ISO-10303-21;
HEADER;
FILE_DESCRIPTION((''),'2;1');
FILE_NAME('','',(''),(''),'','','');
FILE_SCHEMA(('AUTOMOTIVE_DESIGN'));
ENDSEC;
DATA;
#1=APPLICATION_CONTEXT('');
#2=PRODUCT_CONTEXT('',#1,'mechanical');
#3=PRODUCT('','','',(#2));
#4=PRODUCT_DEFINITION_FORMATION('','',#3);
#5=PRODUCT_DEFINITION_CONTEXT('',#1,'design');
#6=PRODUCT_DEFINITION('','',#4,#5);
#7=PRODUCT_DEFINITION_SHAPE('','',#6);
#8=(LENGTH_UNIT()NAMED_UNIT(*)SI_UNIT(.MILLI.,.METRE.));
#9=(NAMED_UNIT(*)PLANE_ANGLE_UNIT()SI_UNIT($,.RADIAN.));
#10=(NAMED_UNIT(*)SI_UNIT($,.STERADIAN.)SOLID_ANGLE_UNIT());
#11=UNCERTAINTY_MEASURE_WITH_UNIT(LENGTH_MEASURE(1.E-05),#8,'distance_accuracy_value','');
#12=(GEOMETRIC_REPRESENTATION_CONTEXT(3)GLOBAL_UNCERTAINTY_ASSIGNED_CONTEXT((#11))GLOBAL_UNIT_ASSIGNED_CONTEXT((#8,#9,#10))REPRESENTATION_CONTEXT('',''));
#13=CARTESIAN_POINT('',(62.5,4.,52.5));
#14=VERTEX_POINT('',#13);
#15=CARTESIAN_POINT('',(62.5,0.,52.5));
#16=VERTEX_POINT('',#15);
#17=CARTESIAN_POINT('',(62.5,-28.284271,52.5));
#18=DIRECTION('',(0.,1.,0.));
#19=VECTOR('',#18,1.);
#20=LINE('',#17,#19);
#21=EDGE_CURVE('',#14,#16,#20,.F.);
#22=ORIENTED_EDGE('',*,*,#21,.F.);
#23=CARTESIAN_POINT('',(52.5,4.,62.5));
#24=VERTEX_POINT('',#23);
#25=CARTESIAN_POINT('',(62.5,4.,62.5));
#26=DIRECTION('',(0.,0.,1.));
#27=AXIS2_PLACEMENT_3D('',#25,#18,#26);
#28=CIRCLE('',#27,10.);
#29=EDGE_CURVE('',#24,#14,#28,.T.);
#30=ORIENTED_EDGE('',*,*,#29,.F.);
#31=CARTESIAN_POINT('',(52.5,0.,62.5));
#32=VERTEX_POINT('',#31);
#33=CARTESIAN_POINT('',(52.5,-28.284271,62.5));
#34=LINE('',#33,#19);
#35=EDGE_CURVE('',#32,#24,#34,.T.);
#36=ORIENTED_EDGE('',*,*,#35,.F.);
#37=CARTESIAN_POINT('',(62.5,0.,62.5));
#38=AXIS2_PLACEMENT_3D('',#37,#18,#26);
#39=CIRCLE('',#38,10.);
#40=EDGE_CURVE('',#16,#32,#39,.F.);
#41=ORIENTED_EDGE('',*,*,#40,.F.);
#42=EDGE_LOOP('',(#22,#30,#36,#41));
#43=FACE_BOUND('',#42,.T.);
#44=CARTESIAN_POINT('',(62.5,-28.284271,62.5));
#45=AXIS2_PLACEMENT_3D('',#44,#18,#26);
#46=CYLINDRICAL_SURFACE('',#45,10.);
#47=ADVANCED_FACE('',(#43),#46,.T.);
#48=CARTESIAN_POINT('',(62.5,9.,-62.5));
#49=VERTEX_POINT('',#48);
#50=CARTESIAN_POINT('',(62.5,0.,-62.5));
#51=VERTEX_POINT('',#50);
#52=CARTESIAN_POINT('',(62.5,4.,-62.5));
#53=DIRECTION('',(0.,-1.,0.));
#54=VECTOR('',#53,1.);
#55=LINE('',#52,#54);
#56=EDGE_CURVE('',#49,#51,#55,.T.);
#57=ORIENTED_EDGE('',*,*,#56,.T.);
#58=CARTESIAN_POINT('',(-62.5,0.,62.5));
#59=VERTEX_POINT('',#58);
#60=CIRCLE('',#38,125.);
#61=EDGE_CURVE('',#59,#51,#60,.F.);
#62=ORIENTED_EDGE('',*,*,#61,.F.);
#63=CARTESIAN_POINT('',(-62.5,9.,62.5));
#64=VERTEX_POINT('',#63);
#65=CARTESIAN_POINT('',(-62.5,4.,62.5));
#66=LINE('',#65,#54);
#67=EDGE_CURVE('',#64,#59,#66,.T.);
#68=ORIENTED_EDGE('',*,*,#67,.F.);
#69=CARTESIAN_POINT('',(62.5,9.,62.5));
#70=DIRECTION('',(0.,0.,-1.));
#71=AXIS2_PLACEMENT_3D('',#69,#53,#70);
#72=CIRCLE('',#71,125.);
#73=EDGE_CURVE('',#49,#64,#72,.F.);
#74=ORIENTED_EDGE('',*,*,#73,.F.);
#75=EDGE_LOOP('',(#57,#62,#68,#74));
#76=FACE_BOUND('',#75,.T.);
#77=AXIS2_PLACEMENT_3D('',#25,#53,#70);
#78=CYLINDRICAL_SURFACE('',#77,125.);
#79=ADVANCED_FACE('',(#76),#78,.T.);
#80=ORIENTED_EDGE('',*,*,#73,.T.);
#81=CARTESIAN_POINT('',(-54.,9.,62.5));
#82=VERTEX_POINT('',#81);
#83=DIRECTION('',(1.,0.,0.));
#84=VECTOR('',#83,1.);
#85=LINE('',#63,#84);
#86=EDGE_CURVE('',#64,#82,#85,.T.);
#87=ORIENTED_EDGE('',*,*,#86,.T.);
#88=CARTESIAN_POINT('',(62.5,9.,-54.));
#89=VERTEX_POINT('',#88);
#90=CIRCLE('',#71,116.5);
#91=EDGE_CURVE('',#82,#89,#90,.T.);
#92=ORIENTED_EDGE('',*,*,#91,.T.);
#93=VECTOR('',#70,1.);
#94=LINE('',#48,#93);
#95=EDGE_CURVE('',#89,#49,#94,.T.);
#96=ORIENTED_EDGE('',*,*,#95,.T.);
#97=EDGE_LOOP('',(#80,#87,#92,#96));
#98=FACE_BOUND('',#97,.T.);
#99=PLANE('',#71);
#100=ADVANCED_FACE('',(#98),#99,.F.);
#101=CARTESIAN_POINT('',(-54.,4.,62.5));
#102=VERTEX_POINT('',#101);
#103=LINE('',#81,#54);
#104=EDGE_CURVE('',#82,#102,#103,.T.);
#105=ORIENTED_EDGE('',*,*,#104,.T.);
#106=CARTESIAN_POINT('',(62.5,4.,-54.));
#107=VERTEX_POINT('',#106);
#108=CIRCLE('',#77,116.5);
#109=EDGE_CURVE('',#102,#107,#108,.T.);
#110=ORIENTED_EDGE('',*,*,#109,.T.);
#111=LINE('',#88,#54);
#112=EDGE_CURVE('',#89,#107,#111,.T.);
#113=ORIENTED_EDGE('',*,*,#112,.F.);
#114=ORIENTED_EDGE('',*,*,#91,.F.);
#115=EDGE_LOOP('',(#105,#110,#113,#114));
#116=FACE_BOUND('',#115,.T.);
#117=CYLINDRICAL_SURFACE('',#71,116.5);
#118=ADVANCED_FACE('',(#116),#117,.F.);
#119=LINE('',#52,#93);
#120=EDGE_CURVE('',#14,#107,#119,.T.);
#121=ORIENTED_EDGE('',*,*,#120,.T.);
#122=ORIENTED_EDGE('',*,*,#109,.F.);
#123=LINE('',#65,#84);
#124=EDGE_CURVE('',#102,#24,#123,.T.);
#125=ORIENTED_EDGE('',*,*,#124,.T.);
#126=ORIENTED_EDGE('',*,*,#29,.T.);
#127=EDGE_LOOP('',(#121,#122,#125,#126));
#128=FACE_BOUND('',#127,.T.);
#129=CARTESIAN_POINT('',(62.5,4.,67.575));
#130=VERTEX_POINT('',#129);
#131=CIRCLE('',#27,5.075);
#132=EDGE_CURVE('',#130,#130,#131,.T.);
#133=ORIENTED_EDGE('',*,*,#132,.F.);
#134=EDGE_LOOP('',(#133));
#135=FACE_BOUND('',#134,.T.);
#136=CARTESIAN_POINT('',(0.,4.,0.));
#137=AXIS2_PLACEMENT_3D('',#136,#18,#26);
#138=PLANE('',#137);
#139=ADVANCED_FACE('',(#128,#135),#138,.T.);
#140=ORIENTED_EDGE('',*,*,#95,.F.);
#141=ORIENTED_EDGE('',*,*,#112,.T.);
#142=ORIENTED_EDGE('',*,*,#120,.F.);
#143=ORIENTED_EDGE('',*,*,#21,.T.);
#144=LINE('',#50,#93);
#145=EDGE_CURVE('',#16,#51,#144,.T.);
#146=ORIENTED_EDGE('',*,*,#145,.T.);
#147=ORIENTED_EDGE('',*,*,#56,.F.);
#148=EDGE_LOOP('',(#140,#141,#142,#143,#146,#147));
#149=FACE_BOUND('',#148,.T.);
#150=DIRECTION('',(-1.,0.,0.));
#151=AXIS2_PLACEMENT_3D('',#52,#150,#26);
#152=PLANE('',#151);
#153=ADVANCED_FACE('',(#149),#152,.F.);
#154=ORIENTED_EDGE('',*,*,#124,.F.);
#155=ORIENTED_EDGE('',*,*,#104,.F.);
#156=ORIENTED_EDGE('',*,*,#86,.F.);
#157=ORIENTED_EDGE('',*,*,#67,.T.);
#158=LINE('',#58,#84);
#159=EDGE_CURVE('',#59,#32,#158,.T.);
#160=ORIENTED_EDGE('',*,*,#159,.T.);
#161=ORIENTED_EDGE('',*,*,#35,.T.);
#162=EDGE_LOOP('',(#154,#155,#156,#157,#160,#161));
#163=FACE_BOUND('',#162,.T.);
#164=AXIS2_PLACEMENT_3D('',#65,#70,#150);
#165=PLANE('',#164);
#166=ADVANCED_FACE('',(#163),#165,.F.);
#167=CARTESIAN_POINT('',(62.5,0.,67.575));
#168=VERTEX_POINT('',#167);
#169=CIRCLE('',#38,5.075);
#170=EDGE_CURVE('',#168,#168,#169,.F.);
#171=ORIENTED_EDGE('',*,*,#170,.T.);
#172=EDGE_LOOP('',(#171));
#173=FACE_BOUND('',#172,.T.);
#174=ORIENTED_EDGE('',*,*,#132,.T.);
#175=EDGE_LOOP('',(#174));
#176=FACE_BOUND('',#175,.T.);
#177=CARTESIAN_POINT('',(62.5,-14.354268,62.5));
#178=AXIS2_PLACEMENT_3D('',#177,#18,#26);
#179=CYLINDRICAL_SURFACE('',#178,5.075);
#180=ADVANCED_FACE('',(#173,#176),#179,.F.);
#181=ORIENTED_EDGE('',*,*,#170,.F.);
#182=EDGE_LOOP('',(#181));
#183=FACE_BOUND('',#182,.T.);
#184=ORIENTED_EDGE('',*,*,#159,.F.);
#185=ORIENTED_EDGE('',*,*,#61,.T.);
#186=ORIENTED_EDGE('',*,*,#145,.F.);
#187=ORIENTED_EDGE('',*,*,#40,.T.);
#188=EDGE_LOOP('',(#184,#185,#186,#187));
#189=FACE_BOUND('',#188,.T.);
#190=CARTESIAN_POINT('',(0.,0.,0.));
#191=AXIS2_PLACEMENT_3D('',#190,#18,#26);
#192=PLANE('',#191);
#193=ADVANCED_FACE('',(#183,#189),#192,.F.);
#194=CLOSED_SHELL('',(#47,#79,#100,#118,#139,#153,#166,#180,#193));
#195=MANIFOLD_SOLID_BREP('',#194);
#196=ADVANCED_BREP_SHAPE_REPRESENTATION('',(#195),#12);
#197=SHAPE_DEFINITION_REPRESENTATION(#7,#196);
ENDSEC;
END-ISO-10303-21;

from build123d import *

# Parameters (mm, degrees)
SKETCH1_W           = 125
SKETCH1_H           = 125
BOSS_EXTRUDE1_DEPTH = 4
BOSS_EXTRUDE2_DEPTH = 5
SKETCH3_R           = 10
BOSS_EXTRUDE3_DEPTH = 4
SKETCH4_R           = 5.075
CUT_EXTRUDE1_DEPTH  = 4
FILLET1_R           = 125


with BuildPart() as part:
    # Sketch1 → Boss-Extrude1 (new body)
    with BuildSketch(Plane(origin=(0, 0, 0), x_dir=(1, 0, 0), z_dir=(0, 1, 0))):
        Rectangle(SKETCH1_W, SKETCH1_H)
    extrude(amount=BOSS_EXTRUDE1_DEPTH)

    # Sketch2 → Boss-Extrude2 (add)
    with BuildSketch(Plane(origin=(0, 4, 0), x_dir=(1, 0, 0), z_dir=(0, 1, 0))):
        with BuildLine():
            Line((-62.5, -62.5), (-62.5, 62.5))
            Line((-62.5, 62.5), (62.5, 62.5))
            Line((62.5, 62.5), (62.5, 54))
            ThreePointArc((62.5, 54), (-19.877940008, 19.877940008), (-54, -62.5))
            Line((-54, -62.5), (-62.5, -62.5))
        make_face()
    extrude(amount=BOSS_EXTRUDE2_DEPTH)

    # Sketch3 → Boss-Extrude3 (add)
    with BuildSketch(Plane(origin=(0, 4, 0), x_dir=(1, 0, 0), z_dir=(0, 1, 0))):
        with Locations((62.5, -62.5)):
            Circle(SKETCH3_R)
    extrude(amount=-BOSS_EXTRUDE3_DEPTH)

    # Sketch4 → Cut-Extrude1 (cut)
    with BuildSketch(Plane(origin=(0, 4, 0), x_dir=(1, 0, 0), z_dir=(0, 1, 0))):
        with Locations(Location((62.5, -62.5, 0), (0, 0, 270))):
            Circle(SKETCH4_R)
    extrude(amount=-CUT_EXTRUDE1_DEPTH, mode=Mode.SUBTRACT)

    # Fillet1
    fillet1_edges = [part.edges().sort_by_distance(p)[0] for p in [
        (-62.5, 4.5, -62.5),
    ]]
    fillet(fillet1_edges, radius=FILLET1_R - 0.0001)  # a hair under: the kernel refuses the full size


solid = part.part
